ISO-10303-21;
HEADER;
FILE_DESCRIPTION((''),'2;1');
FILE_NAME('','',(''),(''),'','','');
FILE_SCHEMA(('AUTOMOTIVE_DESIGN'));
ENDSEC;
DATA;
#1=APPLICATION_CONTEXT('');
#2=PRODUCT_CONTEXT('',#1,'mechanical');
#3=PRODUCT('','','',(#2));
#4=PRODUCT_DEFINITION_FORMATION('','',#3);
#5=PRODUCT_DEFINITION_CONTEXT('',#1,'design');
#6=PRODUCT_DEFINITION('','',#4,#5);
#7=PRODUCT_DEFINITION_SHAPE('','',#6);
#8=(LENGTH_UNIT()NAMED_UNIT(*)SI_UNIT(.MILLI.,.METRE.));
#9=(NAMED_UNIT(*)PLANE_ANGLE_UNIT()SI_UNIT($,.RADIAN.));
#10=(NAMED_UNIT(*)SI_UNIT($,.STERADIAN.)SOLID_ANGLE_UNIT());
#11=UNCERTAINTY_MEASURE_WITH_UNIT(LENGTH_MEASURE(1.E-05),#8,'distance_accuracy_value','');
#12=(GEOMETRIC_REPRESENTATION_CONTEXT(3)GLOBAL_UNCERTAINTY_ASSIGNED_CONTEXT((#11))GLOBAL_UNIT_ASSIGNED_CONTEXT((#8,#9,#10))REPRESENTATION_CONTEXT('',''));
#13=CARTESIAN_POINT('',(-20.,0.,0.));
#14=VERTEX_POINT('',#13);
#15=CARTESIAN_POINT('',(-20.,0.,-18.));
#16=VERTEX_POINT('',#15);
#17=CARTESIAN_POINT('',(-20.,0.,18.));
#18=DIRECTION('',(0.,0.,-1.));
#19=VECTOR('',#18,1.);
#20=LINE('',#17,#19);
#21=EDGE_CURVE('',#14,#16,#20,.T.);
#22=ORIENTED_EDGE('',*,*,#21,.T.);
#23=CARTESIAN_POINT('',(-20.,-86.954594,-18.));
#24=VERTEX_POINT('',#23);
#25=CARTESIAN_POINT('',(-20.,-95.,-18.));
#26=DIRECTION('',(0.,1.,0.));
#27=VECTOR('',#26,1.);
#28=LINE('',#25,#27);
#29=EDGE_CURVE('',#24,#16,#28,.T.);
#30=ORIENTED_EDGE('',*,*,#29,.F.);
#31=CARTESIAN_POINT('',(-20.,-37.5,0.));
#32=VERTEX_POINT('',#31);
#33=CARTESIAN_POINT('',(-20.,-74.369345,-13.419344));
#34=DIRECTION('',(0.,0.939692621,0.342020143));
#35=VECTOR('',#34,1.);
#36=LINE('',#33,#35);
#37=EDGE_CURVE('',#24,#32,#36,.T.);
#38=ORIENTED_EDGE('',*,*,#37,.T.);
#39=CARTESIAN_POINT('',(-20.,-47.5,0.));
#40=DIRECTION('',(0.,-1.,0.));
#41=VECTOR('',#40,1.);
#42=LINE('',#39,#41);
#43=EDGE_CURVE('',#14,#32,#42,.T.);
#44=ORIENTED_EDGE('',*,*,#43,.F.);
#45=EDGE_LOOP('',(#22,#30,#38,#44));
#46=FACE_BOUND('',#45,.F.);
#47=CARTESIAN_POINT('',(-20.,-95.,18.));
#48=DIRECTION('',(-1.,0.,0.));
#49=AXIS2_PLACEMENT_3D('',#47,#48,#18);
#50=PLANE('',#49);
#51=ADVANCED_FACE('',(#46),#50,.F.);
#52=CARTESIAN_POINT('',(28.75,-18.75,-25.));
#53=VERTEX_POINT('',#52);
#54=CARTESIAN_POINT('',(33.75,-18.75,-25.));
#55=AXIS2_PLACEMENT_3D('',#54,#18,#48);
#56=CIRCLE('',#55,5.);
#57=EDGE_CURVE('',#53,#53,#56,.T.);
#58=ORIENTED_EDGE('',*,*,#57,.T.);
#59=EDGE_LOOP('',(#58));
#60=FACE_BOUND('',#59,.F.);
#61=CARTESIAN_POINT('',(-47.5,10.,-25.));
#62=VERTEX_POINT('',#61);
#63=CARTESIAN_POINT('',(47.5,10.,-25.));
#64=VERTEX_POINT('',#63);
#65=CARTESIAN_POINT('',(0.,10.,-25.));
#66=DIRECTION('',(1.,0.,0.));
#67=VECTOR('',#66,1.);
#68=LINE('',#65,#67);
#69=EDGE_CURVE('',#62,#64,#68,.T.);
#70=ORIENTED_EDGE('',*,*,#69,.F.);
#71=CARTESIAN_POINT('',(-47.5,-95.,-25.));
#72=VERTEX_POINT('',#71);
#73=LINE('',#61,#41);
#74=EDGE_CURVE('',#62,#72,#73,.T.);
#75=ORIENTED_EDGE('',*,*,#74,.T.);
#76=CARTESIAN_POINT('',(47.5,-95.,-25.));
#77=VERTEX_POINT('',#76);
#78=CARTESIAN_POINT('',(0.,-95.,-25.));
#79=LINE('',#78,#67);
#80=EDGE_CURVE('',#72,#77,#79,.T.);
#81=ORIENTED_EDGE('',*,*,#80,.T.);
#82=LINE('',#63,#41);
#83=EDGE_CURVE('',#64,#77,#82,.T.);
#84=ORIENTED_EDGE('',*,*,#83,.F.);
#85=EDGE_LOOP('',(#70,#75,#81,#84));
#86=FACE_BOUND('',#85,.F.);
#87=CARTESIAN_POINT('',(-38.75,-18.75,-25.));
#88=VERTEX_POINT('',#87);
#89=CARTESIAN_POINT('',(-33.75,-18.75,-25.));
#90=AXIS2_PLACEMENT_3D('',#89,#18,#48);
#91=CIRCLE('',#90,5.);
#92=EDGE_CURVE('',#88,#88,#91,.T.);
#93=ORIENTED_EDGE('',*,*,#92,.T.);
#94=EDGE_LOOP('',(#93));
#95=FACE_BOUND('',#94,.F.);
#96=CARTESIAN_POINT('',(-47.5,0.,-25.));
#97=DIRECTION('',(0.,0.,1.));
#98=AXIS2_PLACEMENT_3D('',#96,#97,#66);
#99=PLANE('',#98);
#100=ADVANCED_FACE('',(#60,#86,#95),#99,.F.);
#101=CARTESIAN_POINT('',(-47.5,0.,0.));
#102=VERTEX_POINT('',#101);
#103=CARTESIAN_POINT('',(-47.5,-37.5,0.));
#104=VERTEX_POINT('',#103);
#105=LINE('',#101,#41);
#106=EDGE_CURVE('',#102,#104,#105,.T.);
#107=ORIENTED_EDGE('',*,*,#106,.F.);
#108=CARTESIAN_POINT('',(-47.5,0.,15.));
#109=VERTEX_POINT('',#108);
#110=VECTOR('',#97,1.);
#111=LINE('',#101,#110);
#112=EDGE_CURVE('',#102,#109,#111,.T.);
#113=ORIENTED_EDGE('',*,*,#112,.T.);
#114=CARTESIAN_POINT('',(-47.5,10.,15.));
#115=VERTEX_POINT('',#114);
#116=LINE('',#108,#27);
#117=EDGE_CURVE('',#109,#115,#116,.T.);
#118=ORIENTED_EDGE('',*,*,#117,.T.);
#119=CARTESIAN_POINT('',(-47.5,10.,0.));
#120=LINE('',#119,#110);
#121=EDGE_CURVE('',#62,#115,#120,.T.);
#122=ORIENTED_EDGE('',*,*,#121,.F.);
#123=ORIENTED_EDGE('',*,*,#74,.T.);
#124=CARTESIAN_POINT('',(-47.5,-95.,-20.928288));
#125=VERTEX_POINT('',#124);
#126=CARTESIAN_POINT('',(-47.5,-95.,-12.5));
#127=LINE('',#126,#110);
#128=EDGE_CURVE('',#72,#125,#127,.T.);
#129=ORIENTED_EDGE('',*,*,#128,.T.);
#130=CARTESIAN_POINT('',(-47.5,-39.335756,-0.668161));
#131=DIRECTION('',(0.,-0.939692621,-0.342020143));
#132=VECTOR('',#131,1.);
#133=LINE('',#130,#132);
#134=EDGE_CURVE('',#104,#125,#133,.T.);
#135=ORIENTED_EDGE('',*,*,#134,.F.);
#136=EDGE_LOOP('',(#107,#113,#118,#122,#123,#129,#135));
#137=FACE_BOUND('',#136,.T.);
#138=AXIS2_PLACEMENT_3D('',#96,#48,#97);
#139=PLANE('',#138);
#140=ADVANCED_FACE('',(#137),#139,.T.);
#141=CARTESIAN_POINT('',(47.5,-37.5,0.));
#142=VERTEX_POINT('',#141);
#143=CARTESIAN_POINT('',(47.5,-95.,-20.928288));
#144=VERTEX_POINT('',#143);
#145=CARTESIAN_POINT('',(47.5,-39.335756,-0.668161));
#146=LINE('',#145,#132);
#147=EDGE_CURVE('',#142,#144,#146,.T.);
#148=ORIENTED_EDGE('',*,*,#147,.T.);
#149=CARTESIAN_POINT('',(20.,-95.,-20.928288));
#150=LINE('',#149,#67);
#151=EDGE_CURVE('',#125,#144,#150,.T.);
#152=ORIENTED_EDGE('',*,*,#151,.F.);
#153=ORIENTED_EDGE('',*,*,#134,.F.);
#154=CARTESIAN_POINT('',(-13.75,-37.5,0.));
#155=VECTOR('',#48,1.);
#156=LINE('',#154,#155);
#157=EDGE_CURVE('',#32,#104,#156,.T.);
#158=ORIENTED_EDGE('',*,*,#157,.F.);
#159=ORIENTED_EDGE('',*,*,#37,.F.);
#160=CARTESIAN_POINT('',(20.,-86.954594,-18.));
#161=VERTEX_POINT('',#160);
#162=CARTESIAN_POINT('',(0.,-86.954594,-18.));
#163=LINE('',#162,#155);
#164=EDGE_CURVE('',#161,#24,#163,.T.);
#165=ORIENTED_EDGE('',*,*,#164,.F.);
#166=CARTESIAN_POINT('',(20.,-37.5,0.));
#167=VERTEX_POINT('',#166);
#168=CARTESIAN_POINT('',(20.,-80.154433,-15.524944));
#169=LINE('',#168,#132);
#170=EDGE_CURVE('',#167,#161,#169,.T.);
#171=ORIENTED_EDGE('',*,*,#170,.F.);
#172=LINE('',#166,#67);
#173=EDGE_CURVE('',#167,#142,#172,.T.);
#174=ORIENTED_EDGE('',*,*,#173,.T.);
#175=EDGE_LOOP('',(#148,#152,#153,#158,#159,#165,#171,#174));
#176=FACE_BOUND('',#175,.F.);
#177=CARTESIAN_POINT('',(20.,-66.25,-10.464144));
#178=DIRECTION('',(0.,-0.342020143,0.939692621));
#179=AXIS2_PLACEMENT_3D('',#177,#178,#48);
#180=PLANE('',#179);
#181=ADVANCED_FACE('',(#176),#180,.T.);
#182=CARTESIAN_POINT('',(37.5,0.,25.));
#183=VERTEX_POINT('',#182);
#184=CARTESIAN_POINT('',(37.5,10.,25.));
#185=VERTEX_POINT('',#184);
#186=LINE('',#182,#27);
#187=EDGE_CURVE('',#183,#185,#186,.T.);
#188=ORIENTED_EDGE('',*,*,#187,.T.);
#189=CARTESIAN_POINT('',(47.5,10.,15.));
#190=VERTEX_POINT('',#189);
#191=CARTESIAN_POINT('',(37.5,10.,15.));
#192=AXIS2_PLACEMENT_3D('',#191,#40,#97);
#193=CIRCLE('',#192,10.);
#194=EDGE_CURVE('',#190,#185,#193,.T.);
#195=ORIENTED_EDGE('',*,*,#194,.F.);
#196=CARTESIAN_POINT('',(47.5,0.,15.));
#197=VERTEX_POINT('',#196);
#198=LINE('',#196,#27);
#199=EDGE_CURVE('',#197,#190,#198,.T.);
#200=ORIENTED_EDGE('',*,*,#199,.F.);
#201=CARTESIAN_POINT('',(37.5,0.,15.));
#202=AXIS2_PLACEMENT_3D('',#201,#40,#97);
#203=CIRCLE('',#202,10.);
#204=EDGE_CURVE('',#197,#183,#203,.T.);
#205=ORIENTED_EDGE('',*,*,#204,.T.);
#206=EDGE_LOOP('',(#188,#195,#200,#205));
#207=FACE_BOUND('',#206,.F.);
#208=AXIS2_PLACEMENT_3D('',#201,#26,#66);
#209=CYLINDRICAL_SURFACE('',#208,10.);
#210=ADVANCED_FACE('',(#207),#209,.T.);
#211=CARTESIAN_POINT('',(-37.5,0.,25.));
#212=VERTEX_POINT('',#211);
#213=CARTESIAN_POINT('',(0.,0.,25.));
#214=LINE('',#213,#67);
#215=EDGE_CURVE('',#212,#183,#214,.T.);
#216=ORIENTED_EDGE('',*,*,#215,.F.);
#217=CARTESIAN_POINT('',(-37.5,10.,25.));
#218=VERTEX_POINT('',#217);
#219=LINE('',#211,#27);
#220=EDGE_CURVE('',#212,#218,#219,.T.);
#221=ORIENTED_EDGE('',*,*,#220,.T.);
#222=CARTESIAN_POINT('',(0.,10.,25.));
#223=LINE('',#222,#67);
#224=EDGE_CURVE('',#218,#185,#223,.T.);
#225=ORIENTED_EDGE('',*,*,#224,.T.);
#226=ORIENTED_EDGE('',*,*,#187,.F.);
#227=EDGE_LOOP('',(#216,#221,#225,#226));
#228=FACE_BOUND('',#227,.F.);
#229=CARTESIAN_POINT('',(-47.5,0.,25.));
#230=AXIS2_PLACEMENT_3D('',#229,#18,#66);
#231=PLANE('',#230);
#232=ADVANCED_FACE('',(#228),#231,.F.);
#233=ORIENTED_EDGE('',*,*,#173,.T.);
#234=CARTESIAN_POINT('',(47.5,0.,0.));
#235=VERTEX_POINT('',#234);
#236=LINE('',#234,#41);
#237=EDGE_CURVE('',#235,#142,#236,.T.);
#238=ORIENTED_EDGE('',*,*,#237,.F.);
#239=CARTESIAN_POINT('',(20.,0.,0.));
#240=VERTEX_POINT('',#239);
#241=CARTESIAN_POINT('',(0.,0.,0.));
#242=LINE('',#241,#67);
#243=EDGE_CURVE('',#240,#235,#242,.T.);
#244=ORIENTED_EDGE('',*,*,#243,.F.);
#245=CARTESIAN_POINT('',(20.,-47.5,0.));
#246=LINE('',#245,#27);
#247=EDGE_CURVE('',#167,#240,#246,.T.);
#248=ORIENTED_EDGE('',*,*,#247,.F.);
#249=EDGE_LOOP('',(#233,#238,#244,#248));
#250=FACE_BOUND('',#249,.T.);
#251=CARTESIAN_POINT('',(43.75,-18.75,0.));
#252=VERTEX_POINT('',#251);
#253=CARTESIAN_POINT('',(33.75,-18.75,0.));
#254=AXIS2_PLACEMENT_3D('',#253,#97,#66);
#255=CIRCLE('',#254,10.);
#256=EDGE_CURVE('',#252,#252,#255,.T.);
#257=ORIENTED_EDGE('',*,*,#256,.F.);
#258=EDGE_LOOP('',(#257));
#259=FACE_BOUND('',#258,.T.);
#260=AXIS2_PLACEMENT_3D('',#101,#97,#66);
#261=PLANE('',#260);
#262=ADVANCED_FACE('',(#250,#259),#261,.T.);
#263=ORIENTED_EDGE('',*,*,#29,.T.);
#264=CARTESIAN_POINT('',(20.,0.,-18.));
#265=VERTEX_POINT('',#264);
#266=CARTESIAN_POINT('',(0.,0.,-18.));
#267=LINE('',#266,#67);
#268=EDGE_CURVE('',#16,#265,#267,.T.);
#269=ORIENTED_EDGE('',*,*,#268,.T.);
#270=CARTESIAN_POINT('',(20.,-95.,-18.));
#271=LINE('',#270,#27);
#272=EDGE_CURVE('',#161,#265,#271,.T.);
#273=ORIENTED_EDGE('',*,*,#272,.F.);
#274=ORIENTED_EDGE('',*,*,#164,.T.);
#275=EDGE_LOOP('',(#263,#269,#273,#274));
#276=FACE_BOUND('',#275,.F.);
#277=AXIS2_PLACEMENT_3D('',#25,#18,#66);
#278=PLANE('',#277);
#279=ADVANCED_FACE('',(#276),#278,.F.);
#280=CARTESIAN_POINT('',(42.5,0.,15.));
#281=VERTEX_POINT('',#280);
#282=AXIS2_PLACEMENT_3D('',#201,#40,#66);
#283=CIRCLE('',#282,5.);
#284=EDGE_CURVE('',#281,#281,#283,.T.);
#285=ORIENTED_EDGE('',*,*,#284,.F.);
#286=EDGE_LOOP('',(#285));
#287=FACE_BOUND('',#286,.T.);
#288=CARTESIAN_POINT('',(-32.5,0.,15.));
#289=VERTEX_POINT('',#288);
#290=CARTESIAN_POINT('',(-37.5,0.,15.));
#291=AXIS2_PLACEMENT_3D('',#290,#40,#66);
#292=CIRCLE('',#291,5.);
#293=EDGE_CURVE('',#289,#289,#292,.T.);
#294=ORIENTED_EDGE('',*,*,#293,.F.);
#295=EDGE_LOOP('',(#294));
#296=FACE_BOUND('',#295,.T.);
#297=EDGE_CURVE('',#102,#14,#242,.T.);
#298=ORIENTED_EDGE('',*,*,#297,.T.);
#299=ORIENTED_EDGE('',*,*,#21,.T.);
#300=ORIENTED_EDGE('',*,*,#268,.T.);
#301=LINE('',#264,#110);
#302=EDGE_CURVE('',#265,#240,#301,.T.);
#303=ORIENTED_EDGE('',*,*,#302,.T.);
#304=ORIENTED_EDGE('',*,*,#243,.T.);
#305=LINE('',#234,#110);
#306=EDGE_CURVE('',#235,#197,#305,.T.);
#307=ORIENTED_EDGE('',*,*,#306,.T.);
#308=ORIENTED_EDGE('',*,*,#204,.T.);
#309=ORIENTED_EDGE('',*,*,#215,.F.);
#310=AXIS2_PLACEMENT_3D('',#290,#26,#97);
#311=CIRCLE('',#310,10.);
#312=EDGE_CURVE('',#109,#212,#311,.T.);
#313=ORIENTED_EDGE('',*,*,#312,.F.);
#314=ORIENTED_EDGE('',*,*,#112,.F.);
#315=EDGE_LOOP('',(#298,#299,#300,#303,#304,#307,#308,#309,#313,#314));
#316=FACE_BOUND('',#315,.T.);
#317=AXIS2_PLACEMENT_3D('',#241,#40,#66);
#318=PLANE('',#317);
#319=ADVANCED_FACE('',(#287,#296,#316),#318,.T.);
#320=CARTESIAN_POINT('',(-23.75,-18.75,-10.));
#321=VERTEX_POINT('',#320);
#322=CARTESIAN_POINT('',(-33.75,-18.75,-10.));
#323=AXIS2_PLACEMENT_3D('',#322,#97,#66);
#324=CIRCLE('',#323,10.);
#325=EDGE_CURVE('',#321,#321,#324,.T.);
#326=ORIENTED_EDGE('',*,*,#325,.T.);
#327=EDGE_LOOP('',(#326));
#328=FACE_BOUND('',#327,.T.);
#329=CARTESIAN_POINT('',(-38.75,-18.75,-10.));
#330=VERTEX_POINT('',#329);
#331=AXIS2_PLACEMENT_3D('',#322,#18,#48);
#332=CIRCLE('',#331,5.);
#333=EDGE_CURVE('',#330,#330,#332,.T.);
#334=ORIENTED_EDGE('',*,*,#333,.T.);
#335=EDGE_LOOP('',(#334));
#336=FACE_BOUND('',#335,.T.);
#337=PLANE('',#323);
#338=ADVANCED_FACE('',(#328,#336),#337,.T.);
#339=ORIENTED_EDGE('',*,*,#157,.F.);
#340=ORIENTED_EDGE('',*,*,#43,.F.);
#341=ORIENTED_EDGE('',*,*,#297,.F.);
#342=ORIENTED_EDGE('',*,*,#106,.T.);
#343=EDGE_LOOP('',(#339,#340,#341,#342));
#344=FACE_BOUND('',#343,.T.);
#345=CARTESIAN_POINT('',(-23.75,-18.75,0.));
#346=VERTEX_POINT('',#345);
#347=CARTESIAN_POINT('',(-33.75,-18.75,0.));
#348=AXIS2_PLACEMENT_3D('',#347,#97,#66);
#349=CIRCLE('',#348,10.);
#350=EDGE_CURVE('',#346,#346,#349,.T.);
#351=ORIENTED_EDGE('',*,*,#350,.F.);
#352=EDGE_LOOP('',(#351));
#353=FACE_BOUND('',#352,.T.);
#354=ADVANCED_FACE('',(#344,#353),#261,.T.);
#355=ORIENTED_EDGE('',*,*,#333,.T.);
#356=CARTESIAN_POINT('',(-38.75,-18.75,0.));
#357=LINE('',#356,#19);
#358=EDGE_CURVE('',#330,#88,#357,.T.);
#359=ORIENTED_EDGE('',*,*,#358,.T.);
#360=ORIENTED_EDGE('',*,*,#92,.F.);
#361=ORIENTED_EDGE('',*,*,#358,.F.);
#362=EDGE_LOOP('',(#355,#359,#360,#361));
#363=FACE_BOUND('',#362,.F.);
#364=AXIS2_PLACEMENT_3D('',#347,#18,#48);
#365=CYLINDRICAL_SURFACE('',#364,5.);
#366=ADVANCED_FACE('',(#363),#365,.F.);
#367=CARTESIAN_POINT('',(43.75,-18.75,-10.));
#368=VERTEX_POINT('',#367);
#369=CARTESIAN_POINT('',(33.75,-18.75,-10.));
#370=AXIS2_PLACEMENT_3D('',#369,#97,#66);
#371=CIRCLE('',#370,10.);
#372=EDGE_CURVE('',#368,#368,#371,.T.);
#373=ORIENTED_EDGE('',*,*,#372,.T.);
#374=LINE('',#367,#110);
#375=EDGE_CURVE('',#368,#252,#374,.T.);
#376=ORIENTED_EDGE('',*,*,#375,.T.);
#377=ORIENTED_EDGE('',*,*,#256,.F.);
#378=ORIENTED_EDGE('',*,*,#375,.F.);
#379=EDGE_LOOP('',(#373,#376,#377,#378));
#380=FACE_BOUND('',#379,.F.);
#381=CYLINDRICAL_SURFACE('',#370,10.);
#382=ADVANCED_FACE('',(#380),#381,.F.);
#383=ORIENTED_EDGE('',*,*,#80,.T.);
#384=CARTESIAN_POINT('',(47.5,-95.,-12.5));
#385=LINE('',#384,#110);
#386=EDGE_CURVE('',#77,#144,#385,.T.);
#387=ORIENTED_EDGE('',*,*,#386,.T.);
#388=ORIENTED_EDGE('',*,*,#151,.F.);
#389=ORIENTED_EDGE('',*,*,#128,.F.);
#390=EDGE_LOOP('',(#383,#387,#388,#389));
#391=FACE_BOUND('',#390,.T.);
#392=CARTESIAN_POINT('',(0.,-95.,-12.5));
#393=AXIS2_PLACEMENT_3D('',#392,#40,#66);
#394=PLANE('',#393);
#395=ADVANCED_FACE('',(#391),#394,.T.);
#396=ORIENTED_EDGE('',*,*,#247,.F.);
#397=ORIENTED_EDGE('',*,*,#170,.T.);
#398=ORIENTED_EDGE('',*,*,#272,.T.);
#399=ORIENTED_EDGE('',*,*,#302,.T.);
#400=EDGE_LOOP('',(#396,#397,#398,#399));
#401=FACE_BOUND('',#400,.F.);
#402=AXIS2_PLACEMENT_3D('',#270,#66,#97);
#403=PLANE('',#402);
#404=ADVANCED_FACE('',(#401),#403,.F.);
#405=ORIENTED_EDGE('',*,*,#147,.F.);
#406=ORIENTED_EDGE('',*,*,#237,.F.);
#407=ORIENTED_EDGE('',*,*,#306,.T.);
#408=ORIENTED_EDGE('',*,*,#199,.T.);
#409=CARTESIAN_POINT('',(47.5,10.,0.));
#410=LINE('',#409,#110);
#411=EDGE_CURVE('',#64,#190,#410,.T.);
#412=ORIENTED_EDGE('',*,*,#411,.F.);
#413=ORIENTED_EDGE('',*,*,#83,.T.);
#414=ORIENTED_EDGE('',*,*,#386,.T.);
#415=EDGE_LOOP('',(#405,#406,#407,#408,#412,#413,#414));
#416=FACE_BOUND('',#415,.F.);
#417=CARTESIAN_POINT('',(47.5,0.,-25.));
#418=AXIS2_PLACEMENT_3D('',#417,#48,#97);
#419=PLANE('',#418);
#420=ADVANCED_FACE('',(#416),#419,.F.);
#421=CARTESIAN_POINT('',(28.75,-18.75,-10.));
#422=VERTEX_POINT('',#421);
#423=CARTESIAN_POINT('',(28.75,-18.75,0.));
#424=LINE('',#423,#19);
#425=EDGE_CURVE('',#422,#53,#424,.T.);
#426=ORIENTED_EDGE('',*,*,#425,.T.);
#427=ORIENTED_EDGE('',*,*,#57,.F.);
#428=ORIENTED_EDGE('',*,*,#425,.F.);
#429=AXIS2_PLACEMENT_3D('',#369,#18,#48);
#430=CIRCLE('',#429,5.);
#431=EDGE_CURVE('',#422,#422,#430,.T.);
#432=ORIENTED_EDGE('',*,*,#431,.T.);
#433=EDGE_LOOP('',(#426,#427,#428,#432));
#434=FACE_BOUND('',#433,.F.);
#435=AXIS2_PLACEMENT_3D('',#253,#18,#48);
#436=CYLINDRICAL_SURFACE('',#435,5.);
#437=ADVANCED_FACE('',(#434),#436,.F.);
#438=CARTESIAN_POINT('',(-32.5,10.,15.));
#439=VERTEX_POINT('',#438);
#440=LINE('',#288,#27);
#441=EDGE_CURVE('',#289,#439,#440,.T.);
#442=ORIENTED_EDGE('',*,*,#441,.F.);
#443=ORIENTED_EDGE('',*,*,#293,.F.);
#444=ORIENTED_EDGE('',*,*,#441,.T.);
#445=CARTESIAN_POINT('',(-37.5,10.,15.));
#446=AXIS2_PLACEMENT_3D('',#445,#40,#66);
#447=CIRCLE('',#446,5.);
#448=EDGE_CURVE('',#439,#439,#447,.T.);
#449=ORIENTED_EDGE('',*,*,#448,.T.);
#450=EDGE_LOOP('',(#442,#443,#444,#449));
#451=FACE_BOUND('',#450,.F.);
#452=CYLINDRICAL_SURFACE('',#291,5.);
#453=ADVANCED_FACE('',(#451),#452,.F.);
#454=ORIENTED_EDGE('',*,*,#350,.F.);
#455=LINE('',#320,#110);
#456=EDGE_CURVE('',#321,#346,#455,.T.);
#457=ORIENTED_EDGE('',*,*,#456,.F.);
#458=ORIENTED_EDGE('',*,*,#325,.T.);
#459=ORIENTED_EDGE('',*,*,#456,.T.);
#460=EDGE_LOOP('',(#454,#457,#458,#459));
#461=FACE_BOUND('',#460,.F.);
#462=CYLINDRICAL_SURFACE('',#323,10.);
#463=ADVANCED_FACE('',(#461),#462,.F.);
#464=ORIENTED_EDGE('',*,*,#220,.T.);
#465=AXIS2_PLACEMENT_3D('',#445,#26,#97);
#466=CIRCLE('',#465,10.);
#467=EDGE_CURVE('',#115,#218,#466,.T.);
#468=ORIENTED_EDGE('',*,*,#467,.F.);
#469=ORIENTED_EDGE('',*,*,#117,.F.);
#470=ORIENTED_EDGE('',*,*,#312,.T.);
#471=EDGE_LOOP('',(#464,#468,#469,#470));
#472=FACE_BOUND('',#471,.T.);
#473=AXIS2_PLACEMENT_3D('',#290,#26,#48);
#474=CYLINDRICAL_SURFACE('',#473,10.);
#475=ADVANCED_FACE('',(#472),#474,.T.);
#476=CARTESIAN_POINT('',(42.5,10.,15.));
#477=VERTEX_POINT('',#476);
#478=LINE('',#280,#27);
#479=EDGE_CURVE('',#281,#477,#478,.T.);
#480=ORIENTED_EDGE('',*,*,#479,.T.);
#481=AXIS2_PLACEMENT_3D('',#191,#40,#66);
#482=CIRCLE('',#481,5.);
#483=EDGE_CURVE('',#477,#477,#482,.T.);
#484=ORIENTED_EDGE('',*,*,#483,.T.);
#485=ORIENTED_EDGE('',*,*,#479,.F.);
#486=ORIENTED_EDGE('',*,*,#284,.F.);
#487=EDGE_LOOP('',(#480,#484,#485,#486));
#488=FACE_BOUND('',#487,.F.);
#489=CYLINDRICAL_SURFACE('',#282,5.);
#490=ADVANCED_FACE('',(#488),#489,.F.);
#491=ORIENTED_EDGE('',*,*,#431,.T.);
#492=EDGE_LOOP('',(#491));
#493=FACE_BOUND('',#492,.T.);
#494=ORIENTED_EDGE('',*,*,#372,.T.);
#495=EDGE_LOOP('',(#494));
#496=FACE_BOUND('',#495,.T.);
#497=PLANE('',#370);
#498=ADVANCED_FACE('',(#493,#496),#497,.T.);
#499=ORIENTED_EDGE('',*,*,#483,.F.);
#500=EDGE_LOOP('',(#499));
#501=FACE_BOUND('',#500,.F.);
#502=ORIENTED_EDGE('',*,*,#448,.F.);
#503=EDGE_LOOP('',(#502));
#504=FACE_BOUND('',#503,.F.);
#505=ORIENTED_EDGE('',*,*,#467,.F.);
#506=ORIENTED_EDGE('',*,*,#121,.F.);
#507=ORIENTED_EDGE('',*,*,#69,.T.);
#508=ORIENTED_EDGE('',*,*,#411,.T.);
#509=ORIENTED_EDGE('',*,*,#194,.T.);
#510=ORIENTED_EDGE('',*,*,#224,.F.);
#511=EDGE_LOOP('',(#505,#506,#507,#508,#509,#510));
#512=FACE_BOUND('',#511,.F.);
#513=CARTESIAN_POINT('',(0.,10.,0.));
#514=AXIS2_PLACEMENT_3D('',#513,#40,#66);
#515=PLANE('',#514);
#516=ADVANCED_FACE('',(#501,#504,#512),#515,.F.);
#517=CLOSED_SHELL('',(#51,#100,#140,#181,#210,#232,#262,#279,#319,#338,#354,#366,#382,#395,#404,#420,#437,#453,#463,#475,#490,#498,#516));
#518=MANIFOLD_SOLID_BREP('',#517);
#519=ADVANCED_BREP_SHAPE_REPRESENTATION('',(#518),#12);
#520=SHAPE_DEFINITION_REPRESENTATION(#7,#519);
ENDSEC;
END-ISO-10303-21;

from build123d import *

# Parameters (mm, degrees)
F0_W            = 95
F0_H            = 50
F1_DEPTH        = 10
F2_R            = 10
F3_R            = 5
F4_DEPTH        = 10
F3_W            = 95
F3_H            = 25
F5_DEPTH        = 95
F6_W            = 40
F6_H            = 18
F7_DEPTH        = 95
F8_C1_SIZE2     = 20.9282884703
F8_C1_SIZE      = 57.5
F10_D           = 10
F10_CBORE_D     = 20
F10_CBORE_DEPTH = 10


with BuildPart() as f1:
    # F0 (on Front) → F1 (new body)
    with BuildSketch(Plane.XZ):
        Rectangle(F0_W, F0_H)
    extrude(amount=-F1_DEPTH)

    # F2
    f2_edges = [f1.edges().sort_by_distance(p)[0] for p in [
        (-47.5, 5, 25),
        (47.5, 5, 25),
    ]]
    fillet(f2_edges, radius=F2_R)

    # F3 (on face) → F4 (cut, through all)
    with BuildSketch(Plane.XZ):
        with Locations((-37.5, 15)):
            Circle(F3_R)
        with Locations((37.5, 15)):
            Circle(F3_R)
    extrude(amount=-F4_DEPTH, mode=Mode.SUBTRACT)

    # F3 (on face) → F5 (join)
    with BuildSketch(Plane.XZ):
        with Locations((0, -12.5)):
            Rectangle(F3_W, F3_H)
    extrude(amount=F5_DEPTH)

    # F6 (on face) → F7 (cut, through all)
    with BuildSketch(Plane.XZ.offset(95)):
        with Locations((0, -9)):
            Rectangle(F6_W, F6_H)
        with Locations((0, 9)):
            Rectangle(F6_W, F6_H)
    extrude(amount=-F7_DEPTH, mode=Mode.SUBTRACT)

    # F8: chamfer of 57.5 x 20.9282884703 on 2 edges, made by hand

    # F8_c1
    f8_c1_edges = [f1.edges().sort_by_distance(p)[0] for p in [
        (33.75, -95, 0),
    ]]
    f8_c1_side = f1.faces().sort_by_distance((33.75, -94.5814342306, 0))[0]
    chamfer(f8_c1_edges, length=F8_C1_SIZE, length2=F8_C1_SIZE2, reference=f8_c1_side)

    # F10 (through all)
    with Locations(Plane.XY):
        with Locations((-33.75, -18.75), (33.75, -18.75)):
            CounterBoreHole(F10_D / 2, F10_CBORE_D / 2, F10_CBORE_DEPTH)


solid = f1.part
